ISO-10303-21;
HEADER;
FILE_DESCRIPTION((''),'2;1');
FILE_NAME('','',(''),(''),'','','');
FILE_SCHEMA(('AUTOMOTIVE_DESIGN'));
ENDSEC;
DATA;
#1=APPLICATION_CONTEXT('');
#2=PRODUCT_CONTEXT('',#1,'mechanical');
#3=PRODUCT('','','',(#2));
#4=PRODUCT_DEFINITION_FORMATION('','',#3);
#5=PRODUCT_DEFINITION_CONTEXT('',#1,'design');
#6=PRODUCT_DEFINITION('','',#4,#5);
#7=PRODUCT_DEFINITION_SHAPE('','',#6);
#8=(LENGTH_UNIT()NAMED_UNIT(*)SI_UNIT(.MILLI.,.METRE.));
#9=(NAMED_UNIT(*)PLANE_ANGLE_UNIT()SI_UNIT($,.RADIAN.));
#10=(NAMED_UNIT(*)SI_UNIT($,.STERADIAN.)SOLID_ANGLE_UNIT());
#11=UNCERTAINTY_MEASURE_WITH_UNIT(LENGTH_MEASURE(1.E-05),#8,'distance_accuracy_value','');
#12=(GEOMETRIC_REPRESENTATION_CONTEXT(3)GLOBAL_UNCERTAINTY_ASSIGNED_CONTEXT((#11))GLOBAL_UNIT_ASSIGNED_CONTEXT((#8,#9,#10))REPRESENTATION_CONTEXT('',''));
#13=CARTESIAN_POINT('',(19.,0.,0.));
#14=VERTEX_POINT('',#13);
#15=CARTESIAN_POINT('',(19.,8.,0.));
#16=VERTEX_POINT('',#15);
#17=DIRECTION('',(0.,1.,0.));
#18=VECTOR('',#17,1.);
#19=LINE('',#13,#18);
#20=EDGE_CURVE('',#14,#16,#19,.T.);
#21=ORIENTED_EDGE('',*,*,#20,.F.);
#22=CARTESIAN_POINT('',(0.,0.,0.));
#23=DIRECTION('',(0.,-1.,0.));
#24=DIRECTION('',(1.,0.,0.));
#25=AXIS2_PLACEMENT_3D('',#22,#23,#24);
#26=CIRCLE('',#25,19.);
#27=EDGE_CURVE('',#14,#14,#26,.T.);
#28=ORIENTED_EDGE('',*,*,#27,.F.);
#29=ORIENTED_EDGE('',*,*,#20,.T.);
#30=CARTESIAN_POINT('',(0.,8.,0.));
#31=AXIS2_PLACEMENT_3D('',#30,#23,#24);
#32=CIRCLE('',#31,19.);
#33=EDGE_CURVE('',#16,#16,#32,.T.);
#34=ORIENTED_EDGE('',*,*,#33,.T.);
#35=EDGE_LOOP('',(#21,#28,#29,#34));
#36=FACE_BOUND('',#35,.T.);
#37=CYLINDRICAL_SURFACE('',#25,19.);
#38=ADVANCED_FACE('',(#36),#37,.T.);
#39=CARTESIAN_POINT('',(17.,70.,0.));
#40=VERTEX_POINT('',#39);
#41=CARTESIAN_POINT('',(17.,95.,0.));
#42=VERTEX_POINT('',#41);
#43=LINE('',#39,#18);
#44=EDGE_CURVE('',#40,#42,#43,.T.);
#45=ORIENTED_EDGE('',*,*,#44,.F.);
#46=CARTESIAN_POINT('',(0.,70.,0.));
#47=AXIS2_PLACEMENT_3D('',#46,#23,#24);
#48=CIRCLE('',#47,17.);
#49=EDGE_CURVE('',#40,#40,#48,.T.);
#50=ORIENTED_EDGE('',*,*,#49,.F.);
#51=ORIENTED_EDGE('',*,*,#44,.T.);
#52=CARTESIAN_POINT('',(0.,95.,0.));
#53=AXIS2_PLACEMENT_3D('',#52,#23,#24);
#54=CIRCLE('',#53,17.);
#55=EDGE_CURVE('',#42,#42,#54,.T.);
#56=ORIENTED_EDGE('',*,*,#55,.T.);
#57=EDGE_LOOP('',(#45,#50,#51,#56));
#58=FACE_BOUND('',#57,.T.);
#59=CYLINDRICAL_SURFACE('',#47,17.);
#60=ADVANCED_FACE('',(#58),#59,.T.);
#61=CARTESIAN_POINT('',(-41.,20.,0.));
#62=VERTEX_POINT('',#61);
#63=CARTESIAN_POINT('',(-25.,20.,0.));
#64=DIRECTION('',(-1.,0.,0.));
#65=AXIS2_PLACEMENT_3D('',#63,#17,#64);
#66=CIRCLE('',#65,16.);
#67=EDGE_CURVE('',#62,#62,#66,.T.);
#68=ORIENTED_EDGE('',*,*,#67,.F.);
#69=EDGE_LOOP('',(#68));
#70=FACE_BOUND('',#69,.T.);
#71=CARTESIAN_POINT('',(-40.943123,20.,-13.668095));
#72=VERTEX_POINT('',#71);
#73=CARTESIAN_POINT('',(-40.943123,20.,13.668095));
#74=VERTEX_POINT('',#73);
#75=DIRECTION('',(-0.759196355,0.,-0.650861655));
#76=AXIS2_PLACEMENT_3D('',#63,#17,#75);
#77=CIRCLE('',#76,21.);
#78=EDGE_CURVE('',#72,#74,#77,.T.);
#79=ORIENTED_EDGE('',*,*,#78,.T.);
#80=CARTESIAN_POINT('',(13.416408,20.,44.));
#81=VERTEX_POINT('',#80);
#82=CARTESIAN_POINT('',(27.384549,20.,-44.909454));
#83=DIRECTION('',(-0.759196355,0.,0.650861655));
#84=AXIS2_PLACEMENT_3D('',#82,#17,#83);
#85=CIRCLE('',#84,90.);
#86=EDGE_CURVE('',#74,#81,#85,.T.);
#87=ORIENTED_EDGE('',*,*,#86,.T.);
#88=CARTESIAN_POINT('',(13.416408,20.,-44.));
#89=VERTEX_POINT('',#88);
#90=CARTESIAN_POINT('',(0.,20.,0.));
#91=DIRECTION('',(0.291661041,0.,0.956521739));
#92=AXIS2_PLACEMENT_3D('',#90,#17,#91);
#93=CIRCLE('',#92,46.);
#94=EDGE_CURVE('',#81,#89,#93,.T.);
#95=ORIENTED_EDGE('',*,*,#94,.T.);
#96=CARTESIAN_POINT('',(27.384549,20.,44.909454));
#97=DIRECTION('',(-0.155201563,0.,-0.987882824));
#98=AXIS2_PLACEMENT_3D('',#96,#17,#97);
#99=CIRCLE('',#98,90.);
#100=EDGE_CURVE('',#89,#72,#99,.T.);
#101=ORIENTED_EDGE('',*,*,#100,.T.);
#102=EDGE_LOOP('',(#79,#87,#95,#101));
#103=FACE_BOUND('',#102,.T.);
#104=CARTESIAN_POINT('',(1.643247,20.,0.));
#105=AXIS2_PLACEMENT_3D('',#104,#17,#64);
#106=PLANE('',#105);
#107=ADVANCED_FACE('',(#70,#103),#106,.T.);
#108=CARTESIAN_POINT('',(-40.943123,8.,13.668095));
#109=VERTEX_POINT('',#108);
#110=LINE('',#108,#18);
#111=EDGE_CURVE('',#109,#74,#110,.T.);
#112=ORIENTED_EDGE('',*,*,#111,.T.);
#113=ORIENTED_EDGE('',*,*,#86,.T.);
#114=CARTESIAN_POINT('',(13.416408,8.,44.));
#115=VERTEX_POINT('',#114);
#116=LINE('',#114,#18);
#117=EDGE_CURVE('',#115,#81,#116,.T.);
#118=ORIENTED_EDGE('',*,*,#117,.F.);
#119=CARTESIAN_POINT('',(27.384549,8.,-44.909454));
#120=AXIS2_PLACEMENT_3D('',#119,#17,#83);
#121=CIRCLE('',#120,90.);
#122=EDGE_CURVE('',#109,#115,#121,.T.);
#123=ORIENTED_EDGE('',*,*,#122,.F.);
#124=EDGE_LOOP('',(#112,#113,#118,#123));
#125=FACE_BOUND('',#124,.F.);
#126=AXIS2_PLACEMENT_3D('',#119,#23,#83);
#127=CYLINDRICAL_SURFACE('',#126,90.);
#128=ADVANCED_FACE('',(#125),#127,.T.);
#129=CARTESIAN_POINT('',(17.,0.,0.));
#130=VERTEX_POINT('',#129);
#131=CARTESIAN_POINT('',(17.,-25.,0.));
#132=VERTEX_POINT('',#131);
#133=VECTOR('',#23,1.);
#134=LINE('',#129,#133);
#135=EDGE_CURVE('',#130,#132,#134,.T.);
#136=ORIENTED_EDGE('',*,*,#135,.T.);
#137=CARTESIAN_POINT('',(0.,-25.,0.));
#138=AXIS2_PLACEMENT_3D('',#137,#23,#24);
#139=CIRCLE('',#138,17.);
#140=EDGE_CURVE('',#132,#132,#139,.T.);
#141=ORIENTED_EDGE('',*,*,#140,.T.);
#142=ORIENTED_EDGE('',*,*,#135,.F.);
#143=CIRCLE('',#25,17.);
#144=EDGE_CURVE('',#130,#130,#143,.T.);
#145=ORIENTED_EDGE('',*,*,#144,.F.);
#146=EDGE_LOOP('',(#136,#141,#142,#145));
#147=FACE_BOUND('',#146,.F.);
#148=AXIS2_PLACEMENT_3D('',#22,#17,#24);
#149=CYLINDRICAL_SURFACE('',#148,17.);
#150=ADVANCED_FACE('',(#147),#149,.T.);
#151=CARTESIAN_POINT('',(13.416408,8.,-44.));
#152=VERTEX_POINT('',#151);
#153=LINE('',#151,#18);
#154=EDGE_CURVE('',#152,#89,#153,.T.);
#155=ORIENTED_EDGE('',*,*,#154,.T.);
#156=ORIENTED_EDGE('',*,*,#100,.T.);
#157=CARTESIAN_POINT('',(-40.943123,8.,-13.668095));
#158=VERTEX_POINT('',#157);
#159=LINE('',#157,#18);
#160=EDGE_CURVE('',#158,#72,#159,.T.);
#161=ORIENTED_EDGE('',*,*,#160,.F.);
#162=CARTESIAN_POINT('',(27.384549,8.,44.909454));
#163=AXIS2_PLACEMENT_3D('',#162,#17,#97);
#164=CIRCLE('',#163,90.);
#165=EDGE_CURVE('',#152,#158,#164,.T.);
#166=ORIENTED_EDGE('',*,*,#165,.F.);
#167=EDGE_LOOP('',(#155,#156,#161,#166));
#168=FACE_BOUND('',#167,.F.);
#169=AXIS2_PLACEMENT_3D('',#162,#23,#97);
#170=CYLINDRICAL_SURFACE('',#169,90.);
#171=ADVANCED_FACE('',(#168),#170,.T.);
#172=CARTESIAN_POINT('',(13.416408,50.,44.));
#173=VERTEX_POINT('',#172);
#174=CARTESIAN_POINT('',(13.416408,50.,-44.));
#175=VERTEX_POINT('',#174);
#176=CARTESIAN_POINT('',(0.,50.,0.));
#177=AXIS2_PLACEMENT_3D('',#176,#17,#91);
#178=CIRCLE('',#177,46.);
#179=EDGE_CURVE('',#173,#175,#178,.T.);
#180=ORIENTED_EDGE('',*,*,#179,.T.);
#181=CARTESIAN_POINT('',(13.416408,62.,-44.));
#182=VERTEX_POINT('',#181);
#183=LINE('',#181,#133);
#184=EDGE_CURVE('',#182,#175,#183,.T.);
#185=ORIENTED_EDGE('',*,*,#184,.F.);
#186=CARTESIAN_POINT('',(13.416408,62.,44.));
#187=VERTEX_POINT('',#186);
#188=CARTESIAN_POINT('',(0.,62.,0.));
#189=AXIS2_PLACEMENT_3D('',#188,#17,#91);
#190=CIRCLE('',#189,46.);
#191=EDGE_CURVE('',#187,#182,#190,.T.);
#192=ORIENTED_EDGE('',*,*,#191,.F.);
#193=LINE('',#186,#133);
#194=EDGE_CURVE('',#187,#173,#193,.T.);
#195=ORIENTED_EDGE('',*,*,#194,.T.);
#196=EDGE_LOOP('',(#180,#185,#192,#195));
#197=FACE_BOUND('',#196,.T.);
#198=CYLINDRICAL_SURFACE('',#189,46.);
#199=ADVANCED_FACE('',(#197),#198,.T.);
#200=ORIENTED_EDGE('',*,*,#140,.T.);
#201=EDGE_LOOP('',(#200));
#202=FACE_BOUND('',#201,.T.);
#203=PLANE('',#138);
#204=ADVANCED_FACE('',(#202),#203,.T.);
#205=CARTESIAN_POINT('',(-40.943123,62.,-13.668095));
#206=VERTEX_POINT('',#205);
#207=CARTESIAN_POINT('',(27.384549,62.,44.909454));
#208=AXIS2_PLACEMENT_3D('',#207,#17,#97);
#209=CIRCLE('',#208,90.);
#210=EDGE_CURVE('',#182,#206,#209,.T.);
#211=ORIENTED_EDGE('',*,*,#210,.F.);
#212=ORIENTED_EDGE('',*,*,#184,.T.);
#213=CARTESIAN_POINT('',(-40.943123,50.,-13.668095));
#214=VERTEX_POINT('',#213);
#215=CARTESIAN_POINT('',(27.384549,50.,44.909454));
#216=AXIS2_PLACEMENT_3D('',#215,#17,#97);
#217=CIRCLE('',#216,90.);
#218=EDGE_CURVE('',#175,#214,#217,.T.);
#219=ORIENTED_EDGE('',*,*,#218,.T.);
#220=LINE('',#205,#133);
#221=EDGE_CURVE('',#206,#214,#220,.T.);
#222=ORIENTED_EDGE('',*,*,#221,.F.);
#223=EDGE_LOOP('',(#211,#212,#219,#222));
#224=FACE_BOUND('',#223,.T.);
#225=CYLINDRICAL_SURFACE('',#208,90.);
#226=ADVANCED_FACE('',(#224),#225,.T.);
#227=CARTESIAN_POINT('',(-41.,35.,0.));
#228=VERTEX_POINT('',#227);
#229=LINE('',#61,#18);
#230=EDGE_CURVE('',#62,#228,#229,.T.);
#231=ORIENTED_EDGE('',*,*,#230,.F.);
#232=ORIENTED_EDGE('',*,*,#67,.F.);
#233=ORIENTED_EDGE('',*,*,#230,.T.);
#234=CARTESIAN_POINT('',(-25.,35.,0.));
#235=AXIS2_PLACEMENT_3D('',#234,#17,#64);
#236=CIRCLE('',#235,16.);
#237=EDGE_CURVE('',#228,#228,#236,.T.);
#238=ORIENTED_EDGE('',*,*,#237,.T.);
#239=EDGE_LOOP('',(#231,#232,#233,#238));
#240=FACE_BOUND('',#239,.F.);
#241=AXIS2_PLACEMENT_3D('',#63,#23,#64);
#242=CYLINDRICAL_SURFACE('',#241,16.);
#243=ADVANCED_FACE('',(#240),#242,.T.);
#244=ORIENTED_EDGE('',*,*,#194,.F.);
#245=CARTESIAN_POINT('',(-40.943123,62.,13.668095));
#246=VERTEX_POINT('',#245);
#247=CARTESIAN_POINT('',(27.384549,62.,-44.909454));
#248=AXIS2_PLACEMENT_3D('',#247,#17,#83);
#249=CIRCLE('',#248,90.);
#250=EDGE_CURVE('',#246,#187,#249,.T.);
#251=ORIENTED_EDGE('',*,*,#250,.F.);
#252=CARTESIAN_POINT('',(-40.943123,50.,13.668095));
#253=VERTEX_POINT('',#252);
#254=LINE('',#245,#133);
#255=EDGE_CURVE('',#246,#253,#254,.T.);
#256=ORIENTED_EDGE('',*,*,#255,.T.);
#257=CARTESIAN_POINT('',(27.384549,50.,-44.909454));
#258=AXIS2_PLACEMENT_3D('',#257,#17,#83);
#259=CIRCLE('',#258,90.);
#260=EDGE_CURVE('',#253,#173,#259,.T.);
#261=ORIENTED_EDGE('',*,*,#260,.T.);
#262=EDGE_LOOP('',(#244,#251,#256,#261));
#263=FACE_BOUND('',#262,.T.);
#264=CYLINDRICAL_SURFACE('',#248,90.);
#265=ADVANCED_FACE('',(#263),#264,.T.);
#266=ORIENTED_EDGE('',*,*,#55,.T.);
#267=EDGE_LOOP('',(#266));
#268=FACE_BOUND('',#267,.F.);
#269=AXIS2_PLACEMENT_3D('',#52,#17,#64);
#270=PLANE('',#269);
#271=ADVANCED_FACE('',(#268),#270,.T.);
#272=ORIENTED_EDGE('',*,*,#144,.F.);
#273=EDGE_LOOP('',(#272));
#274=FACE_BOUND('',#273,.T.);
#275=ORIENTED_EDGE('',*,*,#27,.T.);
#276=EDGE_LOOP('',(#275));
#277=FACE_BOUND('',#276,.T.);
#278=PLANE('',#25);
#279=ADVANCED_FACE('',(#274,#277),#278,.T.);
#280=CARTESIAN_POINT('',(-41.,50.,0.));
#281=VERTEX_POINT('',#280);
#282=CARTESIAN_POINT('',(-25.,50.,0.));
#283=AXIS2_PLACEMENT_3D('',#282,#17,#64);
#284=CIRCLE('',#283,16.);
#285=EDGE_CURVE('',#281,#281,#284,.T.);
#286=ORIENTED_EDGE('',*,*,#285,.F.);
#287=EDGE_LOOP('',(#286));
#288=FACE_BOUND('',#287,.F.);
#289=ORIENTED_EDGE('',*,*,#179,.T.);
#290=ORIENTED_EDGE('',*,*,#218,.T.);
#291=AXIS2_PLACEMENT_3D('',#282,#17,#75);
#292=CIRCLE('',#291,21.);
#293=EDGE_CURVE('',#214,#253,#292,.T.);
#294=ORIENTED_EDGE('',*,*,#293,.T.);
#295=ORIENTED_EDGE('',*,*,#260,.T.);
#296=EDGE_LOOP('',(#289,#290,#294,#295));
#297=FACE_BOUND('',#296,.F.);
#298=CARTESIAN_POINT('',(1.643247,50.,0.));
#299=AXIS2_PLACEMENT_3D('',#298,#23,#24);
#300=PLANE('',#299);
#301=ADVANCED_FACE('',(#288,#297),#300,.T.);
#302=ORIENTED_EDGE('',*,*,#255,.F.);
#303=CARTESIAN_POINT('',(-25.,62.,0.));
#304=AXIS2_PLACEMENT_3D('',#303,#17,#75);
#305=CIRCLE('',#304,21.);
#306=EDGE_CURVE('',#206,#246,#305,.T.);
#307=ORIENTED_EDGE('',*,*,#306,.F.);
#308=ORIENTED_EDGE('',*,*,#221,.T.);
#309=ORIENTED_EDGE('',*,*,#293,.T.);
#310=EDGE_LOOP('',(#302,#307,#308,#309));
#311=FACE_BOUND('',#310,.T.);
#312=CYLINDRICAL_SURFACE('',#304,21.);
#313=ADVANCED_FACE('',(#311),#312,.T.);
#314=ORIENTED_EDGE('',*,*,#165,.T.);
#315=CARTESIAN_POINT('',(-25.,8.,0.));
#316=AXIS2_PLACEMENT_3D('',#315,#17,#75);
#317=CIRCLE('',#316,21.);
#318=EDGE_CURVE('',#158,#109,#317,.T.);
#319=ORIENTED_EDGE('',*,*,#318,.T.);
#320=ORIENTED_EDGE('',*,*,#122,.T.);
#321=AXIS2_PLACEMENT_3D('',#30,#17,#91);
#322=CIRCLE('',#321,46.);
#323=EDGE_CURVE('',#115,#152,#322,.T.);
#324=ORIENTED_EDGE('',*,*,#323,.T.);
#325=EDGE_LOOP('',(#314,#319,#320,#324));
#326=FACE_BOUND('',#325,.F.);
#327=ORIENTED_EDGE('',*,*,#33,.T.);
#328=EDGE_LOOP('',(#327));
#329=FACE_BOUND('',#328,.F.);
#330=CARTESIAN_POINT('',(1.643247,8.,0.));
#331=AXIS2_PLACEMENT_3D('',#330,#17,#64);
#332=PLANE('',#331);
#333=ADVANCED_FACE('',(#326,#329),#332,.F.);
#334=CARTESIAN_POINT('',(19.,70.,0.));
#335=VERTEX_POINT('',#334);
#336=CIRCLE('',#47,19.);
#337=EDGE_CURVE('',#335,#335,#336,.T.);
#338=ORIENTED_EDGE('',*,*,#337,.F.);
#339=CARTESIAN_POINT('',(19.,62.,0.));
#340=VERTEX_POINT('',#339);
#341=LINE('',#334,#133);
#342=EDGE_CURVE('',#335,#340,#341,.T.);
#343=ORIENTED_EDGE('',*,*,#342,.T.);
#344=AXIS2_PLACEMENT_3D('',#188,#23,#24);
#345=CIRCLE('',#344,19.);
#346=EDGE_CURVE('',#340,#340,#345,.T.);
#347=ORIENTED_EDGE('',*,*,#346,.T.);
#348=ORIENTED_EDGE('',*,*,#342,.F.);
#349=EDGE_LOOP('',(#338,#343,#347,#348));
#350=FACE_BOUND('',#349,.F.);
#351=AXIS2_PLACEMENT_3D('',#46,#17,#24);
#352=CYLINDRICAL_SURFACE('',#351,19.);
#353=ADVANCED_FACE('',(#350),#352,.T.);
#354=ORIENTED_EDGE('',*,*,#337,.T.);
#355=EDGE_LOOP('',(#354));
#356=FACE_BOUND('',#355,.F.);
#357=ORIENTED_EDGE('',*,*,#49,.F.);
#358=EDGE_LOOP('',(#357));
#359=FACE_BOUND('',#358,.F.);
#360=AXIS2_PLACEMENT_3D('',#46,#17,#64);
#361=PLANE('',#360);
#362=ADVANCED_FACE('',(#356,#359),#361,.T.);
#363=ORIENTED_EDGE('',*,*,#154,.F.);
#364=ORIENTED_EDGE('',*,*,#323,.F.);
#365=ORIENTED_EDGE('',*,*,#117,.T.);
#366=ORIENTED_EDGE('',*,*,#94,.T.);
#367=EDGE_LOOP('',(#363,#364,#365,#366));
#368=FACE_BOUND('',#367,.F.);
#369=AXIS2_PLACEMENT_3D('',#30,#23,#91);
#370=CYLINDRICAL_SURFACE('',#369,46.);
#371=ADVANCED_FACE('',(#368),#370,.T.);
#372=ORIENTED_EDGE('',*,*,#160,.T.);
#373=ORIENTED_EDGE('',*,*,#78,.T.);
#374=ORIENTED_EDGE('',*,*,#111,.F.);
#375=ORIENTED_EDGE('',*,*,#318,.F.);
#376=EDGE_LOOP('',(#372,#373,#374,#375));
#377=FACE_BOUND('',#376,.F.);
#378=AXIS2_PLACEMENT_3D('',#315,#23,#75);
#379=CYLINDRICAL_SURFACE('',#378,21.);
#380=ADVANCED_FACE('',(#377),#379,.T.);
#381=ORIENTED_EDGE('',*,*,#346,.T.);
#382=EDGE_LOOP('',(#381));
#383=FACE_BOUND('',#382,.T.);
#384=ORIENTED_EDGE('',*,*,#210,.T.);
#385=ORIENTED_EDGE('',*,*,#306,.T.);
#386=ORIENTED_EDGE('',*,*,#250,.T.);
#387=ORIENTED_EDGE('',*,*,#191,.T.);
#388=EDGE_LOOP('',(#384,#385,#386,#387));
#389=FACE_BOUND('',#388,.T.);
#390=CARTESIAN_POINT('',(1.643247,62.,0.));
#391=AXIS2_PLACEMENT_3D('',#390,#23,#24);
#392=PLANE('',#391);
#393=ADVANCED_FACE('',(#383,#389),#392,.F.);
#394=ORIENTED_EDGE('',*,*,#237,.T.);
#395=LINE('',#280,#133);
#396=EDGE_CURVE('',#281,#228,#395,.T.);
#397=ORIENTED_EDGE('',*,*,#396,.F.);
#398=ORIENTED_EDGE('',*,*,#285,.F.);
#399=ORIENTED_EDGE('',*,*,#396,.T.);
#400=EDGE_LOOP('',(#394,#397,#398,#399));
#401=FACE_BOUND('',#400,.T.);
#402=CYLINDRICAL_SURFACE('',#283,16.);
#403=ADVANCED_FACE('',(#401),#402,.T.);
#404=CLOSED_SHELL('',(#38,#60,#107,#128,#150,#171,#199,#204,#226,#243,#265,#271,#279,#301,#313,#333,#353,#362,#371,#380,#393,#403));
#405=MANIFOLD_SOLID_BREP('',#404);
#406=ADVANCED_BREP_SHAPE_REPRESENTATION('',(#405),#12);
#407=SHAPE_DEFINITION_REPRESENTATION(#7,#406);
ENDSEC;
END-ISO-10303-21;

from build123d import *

# Parameters (mm, degrees)
F0_R     = 17
F1_DEPTH = 25
F2_R     = 19
F3_DEPTH = 8
F4_R     = 19
F5_DEPTH = 12
F6_R     = 16
F7_DEPTH = 15


with BuildPart() as f1:
    # F0 (on Front) → F1 (new body)
    with BuildSketch(Plane.XZ):
        Circle(F0_R)
    extrude(amount=F1_DEPTH)

    # F2 (on face) → F3 (join)
    with BuildSketch(Plane.XZ):
        Circle(F2_R)
    extrude(amount=-F3_DEPTH)

    # F4 (on face) → F5 (join)
    with BuildSketch(Plane(origin=(0, 8, 0), x_dir=(-1, 0, 0), z_dir=(0, 1, 0))):
        with BuildLine():
            ThreePointArc((40.9431234611, 13.6680947576), (16.4692576238, 33.6834442487), (-13.416407865, 44))
            ThreePointArc((-13.416407865, 44), (-46, 0), (-13.416407865, -44))
            ThreePointArc((-13.416407865, -44), (16.4692576238, -33.6834442487), (40.9431234611, -13.6680947576))
            ThreePointArc((40.9431234611, -13.6680947576), (46, 0), (40.9431234611, 13.6680947576))
        make_face()
        Circle(F4_R, mode=Mode.SUBTRACT)
        Circle(F4_R)
    extrude(amount=F5_DEPTH)

    # F6 (on face) → F7 (join)
    with BuildSketch(Plane(origin=(0, 20, 0), x_dir=(-1, 0, 0), z_dir=(0, 1, 0))):
        with Locations((25, 0)):
            Circle(F6_R)
    extrude(amount=F7_DEPTH)

    # F8: F1 across face


with BuildPart() as f1_1:
    add(f1.part)
    add(f1.part.mirror(Plane(origin=(-25, 35, 0), x_dir=(-1, 0, 0), z_dir=(0, 1, 0))))


solid = f1_1.part
